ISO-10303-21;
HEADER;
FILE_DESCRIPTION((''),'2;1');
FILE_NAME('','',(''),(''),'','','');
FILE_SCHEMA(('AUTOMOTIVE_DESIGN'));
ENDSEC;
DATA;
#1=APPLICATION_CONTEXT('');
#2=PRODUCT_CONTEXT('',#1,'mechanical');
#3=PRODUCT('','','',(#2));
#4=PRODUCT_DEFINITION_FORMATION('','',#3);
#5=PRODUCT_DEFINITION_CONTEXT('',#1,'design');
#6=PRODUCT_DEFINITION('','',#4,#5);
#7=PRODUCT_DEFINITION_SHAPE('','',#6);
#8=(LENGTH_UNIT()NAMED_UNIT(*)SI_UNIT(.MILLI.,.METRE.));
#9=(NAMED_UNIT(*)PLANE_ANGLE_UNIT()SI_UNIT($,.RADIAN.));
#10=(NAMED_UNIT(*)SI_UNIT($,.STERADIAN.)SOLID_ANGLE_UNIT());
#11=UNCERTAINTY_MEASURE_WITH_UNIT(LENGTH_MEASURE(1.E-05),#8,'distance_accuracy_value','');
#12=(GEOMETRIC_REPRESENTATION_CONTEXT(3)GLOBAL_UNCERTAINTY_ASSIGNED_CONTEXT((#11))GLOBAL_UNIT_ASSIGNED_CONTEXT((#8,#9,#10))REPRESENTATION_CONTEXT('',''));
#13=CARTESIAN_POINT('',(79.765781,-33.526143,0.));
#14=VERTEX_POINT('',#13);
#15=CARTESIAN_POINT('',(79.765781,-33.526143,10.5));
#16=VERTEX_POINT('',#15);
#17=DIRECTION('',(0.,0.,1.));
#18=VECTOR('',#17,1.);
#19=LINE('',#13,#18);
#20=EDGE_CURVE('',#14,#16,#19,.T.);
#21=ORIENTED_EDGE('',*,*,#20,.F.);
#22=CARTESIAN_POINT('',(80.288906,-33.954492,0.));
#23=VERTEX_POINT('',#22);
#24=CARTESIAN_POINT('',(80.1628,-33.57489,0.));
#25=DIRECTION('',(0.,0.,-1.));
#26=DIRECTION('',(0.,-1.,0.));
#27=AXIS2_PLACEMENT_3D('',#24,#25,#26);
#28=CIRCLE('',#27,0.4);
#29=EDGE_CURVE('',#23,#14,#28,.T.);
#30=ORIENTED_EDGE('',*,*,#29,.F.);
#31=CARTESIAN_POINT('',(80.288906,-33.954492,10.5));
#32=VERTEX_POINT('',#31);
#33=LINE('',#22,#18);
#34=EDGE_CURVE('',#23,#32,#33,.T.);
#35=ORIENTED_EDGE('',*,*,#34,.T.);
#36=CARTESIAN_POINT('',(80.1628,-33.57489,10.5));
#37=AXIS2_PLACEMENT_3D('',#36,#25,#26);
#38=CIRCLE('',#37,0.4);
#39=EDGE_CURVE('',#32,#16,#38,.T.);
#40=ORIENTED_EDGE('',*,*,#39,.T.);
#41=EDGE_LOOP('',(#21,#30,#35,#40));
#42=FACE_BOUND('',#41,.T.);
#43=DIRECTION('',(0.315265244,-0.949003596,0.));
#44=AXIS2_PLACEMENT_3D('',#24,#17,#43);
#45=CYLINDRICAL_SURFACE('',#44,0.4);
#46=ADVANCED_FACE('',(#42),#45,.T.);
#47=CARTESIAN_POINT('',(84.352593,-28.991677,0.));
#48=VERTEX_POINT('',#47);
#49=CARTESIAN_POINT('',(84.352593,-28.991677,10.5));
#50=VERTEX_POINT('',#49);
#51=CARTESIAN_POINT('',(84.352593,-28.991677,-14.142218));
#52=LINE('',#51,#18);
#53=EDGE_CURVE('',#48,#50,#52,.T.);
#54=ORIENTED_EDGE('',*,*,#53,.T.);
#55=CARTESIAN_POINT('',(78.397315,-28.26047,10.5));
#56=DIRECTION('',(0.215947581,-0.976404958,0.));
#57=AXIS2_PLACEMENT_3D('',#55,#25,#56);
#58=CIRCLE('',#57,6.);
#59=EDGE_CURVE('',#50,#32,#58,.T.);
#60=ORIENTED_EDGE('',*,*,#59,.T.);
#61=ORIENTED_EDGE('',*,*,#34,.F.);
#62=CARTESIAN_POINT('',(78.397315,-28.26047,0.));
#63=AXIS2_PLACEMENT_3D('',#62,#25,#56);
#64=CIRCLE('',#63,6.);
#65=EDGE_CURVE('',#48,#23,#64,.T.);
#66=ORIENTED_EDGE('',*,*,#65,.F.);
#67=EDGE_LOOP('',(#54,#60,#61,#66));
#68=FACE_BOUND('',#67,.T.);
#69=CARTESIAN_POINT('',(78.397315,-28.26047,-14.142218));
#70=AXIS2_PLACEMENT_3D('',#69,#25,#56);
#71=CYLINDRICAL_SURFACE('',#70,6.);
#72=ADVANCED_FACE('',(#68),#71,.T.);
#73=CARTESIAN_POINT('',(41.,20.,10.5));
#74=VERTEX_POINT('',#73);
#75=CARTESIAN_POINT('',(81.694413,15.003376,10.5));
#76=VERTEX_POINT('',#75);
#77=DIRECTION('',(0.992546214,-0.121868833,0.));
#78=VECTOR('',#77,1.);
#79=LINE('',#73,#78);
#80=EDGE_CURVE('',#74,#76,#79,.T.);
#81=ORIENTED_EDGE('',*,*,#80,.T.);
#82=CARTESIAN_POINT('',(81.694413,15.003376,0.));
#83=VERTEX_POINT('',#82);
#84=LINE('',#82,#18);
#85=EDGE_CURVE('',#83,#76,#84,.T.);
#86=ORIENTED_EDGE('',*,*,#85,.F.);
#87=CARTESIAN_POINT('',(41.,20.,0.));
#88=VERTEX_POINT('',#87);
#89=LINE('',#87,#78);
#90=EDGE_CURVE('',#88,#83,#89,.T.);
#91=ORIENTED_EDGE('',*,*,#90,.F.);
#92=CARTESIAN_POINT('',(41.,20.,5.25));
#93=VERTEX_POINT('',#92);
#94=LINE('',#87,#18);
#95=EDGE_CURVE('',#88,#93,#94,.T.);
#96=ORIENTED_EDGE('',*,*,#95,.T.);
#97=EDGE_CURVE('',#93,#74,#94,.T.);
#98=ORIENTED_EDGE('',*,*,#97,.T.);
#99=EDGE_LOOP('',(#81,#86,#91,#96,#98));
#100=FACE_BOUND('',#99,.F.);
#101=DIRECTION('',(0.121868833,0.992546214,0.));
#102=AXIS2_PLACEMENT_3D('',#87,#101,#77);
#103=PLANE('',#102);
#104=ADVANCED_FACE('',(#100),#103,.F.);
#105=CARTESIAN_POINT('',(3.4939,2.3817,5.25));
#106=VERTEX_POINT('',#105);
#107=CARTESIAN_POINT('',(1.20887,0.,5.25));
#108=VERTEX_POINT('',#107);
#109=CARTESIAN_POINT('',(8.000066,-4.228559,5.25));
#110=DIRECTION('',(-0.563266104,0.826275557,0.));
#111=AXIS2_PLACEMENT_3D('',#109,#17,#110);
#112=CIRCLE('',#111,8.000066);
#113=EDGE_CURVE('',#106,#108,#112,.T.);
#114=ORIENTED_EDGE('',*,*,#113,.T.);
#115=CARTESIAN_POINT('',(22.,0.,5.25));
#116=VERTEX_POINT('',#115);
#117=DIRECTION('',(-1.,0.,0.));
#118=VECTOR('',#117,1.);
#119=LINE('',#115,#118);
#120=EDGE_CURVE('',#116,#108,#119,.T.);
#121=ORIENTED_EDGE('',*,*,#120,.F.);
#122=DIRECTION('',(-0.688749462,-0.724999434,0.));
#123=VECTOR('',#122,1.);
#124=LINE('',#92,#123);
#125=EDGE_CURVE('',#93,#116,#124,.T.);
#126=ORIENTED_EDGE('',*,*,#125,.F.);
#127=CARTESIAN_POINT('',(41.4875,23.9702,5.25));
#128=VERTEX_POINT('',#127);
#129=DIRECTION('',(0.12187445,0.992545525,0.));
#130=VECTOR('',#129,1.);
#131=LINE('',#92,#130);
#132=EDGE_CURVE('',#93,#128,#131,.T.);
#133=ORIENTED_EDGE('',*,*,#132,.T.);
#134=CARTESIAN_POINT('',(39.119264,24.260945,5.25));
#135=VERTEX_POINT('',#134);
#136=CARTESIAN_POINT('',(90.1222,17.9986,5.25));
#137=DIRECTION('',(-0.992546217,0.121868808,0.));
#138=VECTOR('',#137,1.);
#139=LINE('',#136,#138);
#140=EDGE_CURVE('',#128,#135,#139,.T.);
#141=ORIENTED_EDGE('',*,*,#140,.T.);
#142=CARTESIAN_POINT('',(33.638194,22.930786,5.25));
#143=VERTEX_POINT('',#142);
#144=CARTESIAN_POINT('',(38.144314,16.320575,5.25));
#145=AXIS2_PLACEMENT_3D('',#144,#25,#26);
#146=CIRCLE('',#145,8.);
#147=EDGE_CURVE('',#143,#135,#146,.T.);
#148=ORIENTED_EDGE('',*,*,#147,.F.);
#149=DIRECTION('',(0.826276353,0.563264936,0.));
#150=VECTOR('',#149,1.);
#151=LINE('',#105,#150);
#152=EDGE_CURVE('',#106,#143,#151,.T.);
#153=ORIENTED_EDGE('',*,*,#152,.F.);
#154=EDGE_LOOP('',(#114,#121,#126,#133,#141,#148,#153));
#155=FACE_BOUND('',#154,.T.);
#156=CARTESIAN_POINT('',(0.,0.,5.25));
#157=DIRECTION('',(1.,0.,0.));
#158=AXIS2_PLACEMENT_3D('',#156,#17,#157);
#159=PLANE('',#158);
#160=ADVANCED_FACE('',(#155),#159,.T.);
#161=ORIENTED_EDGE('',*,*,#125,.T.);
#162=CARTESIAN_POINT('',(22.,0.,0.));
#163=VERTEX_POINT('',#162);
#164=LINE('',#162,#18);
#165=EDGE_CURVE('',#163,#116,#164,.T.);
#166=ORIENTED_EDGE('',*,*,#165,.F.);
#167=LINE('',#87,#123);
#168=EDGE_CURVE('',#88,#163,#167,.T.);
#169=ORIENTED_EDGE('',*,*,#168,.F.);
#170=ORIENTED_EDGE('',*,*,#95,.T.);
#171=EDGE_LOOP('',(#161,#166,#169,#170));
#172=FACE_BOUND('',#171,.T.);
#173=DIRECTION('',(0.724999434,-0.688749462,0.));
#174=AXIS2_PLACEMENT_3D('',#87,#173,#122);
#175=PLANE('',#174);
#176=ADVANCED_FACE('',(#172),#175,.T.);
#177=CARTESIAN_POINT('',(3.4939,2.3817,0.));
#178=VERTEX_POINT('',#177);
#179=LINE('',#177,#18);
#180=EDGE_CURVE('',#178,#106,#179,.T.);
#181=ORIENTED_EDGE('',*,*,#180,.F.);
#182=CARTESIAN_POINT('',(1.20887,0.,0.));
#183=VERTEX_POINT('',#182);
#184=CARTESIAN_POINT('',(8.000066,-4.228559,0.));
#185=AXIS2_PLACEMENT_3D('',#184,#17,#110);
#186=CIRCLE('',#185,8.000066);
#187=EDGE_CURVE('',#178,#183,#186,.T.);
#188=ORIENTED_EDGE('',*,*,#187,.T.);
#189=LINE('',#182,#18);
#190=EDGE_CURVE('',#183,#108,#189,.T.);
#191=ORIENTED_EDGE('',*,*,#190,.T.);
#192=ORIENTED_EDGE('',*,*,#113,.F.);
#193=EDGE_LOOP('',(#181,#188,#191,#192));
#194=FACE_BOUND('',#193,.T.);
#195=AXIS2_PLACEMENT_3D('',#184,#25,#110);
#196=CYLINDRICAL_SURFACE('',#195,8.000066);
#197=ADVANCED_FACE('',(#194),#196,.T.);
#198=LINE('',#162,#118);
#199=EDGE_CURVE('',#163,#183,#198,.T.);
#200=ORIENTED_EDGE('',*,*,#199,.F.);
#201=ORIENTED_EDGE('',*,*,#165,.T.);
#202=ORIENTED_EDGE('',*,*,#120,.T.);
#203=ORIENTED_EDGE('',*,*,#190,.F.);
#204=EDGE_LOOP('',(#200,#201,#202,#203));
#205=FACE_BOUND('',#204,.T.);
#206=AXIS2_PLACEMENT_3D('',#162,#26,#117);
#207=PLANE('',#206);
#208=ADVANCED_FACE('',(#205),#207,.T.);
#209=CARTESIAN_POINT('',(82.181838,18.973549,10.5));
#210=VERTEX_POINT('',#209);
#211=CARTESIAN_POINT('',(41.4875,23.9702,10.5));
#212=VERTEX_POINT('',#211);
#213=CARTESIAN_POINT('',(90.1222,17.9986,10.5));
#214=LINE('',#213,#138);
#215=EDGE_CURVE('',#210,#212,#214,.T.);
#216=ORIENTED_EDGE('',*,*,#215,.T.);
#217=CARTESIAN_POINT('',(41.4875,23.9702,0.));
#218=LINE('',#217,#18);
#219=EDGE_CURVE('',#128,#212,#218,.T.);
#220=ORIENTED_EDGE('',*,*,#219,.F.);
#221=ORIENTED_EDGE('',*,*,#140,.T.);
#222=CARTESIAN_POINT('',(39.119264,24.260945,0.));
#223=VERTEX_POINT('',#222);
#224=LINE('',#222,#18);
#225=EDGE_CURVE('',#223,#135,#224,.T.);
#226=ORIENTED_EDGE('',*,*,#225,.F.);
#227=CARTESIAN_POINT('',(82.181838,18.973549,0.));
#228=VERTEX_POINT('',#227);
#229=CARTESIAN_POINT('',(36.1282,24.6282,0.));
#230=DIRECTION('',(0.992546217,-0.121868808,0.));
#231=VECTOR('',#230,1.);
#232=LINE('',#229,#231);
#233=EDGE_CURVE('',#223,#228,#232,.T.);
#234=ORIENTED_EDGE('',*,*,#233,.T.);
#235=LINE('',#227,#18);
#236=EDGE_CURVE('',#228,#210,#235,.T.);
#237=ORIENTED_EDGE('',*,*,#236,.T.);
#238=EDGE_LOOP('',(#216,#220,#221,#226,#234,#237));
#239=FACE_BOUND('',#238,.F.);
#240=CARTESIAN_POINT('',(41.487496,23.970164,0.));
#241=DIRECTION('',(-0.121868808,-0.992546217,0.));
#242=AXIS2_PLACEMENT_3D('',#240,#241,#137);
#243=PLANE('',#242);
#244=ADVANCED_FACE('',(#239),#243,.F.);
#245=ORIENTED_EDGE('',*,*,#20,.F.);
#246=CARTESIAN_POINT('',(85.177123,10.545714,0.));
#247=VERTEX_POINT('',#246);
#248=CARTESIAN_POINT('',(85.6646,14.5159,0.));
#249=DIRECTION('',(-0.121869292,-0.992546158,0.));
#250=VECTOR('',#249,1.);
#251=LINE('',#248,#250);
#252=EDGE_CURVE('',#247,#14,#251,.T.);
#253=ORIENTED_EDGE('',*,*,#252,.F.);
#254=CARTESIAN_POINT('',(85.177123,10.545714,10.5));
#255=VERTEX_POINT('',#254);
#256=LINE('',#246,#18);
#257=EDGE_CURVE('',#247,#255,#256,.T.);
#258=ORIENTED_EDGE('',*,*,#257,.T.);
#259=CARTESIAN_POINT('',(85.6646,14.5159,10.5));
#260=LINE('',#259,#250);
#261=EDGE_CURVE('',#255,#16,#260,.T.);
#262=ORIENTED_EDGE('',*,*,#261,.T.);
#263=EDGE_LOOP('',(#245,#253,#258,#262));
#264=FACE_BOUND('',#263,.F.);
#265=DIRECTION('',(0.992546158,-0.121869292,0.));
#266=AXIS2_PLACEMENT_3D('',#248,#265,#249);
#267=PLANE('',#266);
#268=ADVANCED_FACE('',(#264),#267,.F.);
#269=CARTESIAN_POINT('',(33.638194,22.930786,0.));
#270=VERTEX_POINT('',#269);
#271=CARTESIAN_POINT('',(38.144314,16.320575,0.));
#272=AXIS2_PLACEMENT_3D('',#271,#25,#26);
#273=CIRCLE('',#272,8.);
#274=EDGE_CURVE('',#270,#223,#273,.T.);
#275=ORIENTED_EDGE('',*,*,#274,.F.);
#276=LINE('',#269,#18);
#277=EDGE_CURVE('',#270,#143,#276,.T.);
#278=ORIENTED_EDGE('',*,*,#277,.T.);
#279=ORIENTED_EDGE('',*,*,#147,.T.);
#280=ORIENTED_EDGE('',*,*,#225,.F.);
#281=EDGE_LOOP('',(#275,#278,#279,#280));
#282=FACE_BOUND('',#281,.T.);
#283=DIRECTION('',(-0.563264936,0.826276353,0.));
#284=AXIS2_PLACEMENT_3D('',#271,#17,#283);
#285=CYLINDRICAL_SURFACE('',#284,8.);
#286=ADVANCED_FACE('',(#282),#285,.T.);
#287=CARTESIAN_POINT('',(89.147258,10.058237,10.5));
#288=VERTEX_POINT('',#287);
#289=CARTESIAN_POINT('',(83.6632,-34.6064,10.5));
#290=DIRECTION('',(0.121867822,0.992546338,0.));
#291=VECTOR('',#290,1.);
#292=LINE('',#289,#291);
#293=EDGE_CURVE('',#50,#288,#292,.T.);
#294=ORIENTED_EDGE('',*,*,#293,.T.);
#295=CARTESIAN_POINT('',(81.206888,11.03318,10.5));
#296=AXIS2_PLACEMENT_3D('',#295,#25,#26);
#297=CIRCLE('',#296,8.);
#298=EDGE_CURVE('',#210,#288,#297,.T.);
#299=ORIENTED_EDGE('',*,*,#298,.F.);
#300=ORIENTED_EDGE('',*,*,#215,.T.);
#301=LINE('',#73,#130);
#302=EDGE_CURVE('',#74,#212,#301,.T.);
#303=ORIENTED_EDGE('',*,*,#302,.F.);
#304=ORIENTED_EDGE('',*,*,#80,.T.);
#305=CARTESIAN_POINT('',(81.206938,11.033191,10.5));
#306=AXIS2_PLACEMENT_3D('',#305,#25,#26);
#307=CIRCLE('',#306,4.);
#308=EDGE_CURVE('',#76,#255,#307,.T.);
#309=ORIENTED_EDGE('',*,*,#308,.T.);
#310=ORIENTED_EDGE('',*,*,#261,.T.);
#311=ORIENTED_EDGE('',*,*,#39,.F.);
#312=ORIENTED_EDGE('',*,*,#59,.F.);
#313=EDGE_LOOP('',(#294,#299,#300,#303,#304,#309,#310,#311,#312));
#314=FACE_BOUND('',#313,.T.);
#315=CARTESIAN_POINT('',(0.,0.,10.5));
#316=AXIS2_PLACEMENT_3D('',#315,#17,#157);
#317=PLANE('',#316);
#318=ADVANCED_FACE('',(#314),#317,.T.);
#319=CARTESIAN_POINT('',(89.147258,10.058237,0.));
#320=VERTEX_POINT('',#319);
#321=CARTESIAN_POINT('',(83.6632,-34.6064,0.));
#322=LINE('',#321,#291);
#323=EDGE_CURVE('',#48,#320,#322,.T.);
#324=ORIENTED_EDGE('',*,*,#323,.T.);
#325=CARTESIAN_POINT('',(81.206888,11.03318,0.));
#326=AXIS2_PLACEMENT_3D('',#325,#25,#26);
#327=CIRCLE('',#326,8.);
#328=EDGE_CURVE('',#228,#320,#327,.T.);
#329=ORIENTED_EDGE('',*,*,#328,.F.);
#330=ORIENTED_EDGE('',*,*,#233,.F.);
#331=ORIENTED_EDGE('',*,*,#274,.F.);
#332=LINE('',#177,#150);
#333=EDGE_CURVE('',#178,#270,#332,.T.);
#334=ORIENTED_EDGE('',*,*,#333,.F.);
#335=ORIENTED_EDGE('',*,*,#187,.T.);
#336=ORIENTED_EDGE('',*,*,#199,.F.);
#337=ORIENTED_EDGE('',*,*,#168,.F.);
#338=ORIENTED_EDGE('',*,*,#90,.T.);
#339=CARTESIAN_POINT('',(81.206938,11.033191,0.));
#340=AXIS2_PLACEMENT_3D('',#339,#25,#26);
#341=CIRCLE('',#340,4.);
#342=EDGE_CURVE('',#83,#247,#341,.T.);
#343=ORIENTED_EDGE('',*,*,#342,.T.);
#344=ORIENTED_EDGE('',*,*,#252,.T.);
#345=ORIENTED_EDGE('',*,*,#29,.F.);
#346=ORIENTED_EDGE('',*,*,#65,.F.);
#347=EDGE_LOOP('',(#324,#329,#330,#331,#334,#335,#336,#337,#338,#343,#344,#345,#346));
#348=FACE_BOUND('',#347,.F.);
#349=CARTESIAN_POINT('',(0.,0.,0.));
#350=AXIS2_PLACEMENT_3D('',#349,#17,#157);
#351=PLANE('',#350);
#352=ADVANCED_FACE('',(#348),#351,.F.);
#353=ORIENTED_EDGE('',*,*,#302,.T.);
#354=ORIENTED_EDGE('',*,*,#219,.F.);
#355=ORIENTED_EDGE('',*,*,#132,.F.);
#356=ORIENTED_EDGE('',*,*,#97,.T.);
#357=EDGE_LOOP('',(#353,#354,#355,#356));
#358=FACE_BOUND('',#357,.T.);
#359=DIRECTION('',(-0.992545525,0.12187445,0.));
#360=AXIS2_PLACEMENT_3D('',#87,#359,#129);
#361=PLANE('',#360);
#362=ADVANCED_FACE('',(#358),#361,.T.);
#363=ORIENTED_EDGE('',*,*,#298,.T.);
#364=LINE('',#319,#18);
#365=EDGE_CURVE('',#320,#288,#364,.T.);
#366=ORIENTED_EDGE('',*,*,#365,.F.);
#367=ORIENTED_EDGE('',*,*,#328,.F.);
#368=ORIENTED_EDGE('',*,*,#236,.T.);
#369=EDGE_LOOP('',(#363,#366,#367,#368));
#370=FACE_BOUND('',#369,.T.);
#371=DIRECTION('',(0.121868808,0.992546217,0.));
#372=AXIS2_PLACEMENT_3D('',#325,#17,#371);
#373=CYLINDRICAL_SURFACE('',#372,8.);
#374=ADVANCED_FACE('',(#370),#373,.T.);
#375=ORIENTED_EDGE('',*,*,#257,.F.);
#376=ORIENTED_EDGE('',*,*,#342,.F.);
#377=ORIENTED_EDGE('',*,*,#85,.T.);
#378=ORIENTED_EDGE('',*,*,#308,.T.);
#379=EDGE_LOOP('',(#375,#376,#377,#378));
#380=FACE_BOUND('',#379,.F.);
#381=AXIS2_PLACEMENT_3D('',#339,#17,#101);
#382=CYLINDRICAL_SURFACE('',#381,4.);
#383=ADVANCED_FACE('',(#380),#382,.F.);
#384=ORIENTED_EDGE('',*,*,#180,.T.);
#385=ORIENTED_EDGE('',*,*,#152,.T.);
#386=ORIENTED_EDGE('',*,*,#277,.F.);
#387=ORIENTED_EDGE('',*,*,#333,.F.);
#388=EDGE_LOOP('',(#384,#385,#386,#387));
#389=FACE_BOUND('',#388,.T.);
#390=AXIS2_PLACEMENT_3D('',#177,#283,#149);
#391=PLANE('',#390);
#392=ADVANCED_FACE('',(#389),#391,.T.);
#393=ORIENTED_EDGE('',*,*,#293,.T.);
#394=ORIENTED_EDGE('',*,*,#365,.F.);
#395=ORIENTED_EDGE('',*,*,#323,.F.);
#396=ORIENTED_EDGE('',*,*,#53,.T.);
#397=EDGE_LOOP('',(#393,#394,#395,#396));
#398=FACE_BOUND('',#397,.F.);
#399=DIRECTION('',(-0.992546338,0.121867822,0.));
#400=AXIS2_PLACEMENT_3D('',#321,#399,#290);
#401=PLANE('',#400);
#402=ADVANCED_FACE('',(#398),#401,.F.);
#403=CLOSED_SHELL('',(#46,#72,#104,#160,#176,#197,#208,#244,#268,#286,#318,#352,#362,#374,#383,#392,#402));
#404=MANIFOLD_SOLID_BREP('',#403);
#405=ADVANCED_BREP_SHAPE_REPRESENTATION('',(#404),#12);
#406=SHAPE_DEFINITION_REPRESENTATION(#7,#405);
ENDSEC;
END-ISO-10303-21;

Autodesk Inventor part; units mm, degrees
ref_plane "YZ Plane" through (0, 0, 0) normal (1, 0, 0) x (0, 1, 0)
ref_plane "XZ Plane" through (0, 0, 0) normal (0, 1, 0) x (-1, 0, 0)
ref_plane "XY Plane" through (0, 0, 0) normal (0, 0, 1) x (1, 0, 0)
sketch "Base Sketch" plane through (0, 0, 0) normal (0, 0, 1) x (1, 0, 0)
  line L0 (22, 0) -> (0, 0)
  line L1 (3.4939, 2.3817) -> (36.1282, 24.6282)
  line L2 (41, 20) -> (22, 0)
  line L3 (41, 20) -> (85.6646, 14.5159)
  line L4 (90.1222, 17.9986) -> (36.1282, 24.6282)
  line L5 (36.1282, 24.6282) -> (41, 20) construction
  line L6 (41, 20) -> (41.4875, 23.9702)
  line L7 (3.4939, 2.3817) -> (0, 0) construction
  line L8 (0, 0) -> (0, -2.6652) construction
  arc A0 (3.4939, 2.3817) -> (0, -4.2285) centre (8, -4.2285) ccw
  line L9 (85.6646, 14.5159) -> (79.693, -34.1189)
  line L10 (79.693, -34.1189) -> (83.6632, -34.6064)
  line L11 (83.6632, -34.6064) -> (90.1222, 17.9986)
  point P0 (1.2088, 0)
  dimension "d2" = 22
  dimension "d3" = 20
  dimension "d4" = 19
  dimension "d5" = 4
  dimension "d24" = 8
  dimension "d25" = 4
  dimension "d27" = 7
  dimension "d28" = 45
  dimension "d29" = 49
extrude "Lower Arm" add sketch "Base Sketch" along normal blind 5.25 contours L0 A0 L1 L4 L6 L2
extrude "Upper Arm" add sketch "Base Sketch" along normal blind 10.5 contours L6 L4 L11 L10 L9 L3
fillet "Fillet1" radius 8 2 edges at (36.1282, 24.6282, 2.625) (90.1222, 17.9986, 5.25)
fillet "Fillet1" radius 4 1 edges at (85.6646, 14.5159, 5.25)
fillet "Fillet3" radius 6 1 edges at (83.6632, -34.6064, 5.25)
fillet "Fillet4" radius 0.4 1 edges at (79.693, -34.1189, 5.25)
equation "\"d2\" = ConnectionWidth"
equation "\"d3\" = ArmDistance"
equation "\"d4\" = ArmTravelToDistance"
equation "\"d5\" = ArmThickness"
equation "\"d25\" = ArmThickness"
equation "\"d18\" = 0.5 * KeySpacing + 0.5 * KeyWidth"
equation "\"d20\" = KeyWidth + KeySpacing"
equation "\"ConnectionWidth\" = 22"
equation "\"ArmDistance\" = 20"
equation "\"ArmTravelToDistance\" = 19"
equation "\"ArmThickness\" = 4"
equation "\"KeySpacing\" = 0.5"
equation "\"KeyWidth\" = 10"
properties part number "HousingArm0" material "PLA Plastic (Glacial Blue)"
